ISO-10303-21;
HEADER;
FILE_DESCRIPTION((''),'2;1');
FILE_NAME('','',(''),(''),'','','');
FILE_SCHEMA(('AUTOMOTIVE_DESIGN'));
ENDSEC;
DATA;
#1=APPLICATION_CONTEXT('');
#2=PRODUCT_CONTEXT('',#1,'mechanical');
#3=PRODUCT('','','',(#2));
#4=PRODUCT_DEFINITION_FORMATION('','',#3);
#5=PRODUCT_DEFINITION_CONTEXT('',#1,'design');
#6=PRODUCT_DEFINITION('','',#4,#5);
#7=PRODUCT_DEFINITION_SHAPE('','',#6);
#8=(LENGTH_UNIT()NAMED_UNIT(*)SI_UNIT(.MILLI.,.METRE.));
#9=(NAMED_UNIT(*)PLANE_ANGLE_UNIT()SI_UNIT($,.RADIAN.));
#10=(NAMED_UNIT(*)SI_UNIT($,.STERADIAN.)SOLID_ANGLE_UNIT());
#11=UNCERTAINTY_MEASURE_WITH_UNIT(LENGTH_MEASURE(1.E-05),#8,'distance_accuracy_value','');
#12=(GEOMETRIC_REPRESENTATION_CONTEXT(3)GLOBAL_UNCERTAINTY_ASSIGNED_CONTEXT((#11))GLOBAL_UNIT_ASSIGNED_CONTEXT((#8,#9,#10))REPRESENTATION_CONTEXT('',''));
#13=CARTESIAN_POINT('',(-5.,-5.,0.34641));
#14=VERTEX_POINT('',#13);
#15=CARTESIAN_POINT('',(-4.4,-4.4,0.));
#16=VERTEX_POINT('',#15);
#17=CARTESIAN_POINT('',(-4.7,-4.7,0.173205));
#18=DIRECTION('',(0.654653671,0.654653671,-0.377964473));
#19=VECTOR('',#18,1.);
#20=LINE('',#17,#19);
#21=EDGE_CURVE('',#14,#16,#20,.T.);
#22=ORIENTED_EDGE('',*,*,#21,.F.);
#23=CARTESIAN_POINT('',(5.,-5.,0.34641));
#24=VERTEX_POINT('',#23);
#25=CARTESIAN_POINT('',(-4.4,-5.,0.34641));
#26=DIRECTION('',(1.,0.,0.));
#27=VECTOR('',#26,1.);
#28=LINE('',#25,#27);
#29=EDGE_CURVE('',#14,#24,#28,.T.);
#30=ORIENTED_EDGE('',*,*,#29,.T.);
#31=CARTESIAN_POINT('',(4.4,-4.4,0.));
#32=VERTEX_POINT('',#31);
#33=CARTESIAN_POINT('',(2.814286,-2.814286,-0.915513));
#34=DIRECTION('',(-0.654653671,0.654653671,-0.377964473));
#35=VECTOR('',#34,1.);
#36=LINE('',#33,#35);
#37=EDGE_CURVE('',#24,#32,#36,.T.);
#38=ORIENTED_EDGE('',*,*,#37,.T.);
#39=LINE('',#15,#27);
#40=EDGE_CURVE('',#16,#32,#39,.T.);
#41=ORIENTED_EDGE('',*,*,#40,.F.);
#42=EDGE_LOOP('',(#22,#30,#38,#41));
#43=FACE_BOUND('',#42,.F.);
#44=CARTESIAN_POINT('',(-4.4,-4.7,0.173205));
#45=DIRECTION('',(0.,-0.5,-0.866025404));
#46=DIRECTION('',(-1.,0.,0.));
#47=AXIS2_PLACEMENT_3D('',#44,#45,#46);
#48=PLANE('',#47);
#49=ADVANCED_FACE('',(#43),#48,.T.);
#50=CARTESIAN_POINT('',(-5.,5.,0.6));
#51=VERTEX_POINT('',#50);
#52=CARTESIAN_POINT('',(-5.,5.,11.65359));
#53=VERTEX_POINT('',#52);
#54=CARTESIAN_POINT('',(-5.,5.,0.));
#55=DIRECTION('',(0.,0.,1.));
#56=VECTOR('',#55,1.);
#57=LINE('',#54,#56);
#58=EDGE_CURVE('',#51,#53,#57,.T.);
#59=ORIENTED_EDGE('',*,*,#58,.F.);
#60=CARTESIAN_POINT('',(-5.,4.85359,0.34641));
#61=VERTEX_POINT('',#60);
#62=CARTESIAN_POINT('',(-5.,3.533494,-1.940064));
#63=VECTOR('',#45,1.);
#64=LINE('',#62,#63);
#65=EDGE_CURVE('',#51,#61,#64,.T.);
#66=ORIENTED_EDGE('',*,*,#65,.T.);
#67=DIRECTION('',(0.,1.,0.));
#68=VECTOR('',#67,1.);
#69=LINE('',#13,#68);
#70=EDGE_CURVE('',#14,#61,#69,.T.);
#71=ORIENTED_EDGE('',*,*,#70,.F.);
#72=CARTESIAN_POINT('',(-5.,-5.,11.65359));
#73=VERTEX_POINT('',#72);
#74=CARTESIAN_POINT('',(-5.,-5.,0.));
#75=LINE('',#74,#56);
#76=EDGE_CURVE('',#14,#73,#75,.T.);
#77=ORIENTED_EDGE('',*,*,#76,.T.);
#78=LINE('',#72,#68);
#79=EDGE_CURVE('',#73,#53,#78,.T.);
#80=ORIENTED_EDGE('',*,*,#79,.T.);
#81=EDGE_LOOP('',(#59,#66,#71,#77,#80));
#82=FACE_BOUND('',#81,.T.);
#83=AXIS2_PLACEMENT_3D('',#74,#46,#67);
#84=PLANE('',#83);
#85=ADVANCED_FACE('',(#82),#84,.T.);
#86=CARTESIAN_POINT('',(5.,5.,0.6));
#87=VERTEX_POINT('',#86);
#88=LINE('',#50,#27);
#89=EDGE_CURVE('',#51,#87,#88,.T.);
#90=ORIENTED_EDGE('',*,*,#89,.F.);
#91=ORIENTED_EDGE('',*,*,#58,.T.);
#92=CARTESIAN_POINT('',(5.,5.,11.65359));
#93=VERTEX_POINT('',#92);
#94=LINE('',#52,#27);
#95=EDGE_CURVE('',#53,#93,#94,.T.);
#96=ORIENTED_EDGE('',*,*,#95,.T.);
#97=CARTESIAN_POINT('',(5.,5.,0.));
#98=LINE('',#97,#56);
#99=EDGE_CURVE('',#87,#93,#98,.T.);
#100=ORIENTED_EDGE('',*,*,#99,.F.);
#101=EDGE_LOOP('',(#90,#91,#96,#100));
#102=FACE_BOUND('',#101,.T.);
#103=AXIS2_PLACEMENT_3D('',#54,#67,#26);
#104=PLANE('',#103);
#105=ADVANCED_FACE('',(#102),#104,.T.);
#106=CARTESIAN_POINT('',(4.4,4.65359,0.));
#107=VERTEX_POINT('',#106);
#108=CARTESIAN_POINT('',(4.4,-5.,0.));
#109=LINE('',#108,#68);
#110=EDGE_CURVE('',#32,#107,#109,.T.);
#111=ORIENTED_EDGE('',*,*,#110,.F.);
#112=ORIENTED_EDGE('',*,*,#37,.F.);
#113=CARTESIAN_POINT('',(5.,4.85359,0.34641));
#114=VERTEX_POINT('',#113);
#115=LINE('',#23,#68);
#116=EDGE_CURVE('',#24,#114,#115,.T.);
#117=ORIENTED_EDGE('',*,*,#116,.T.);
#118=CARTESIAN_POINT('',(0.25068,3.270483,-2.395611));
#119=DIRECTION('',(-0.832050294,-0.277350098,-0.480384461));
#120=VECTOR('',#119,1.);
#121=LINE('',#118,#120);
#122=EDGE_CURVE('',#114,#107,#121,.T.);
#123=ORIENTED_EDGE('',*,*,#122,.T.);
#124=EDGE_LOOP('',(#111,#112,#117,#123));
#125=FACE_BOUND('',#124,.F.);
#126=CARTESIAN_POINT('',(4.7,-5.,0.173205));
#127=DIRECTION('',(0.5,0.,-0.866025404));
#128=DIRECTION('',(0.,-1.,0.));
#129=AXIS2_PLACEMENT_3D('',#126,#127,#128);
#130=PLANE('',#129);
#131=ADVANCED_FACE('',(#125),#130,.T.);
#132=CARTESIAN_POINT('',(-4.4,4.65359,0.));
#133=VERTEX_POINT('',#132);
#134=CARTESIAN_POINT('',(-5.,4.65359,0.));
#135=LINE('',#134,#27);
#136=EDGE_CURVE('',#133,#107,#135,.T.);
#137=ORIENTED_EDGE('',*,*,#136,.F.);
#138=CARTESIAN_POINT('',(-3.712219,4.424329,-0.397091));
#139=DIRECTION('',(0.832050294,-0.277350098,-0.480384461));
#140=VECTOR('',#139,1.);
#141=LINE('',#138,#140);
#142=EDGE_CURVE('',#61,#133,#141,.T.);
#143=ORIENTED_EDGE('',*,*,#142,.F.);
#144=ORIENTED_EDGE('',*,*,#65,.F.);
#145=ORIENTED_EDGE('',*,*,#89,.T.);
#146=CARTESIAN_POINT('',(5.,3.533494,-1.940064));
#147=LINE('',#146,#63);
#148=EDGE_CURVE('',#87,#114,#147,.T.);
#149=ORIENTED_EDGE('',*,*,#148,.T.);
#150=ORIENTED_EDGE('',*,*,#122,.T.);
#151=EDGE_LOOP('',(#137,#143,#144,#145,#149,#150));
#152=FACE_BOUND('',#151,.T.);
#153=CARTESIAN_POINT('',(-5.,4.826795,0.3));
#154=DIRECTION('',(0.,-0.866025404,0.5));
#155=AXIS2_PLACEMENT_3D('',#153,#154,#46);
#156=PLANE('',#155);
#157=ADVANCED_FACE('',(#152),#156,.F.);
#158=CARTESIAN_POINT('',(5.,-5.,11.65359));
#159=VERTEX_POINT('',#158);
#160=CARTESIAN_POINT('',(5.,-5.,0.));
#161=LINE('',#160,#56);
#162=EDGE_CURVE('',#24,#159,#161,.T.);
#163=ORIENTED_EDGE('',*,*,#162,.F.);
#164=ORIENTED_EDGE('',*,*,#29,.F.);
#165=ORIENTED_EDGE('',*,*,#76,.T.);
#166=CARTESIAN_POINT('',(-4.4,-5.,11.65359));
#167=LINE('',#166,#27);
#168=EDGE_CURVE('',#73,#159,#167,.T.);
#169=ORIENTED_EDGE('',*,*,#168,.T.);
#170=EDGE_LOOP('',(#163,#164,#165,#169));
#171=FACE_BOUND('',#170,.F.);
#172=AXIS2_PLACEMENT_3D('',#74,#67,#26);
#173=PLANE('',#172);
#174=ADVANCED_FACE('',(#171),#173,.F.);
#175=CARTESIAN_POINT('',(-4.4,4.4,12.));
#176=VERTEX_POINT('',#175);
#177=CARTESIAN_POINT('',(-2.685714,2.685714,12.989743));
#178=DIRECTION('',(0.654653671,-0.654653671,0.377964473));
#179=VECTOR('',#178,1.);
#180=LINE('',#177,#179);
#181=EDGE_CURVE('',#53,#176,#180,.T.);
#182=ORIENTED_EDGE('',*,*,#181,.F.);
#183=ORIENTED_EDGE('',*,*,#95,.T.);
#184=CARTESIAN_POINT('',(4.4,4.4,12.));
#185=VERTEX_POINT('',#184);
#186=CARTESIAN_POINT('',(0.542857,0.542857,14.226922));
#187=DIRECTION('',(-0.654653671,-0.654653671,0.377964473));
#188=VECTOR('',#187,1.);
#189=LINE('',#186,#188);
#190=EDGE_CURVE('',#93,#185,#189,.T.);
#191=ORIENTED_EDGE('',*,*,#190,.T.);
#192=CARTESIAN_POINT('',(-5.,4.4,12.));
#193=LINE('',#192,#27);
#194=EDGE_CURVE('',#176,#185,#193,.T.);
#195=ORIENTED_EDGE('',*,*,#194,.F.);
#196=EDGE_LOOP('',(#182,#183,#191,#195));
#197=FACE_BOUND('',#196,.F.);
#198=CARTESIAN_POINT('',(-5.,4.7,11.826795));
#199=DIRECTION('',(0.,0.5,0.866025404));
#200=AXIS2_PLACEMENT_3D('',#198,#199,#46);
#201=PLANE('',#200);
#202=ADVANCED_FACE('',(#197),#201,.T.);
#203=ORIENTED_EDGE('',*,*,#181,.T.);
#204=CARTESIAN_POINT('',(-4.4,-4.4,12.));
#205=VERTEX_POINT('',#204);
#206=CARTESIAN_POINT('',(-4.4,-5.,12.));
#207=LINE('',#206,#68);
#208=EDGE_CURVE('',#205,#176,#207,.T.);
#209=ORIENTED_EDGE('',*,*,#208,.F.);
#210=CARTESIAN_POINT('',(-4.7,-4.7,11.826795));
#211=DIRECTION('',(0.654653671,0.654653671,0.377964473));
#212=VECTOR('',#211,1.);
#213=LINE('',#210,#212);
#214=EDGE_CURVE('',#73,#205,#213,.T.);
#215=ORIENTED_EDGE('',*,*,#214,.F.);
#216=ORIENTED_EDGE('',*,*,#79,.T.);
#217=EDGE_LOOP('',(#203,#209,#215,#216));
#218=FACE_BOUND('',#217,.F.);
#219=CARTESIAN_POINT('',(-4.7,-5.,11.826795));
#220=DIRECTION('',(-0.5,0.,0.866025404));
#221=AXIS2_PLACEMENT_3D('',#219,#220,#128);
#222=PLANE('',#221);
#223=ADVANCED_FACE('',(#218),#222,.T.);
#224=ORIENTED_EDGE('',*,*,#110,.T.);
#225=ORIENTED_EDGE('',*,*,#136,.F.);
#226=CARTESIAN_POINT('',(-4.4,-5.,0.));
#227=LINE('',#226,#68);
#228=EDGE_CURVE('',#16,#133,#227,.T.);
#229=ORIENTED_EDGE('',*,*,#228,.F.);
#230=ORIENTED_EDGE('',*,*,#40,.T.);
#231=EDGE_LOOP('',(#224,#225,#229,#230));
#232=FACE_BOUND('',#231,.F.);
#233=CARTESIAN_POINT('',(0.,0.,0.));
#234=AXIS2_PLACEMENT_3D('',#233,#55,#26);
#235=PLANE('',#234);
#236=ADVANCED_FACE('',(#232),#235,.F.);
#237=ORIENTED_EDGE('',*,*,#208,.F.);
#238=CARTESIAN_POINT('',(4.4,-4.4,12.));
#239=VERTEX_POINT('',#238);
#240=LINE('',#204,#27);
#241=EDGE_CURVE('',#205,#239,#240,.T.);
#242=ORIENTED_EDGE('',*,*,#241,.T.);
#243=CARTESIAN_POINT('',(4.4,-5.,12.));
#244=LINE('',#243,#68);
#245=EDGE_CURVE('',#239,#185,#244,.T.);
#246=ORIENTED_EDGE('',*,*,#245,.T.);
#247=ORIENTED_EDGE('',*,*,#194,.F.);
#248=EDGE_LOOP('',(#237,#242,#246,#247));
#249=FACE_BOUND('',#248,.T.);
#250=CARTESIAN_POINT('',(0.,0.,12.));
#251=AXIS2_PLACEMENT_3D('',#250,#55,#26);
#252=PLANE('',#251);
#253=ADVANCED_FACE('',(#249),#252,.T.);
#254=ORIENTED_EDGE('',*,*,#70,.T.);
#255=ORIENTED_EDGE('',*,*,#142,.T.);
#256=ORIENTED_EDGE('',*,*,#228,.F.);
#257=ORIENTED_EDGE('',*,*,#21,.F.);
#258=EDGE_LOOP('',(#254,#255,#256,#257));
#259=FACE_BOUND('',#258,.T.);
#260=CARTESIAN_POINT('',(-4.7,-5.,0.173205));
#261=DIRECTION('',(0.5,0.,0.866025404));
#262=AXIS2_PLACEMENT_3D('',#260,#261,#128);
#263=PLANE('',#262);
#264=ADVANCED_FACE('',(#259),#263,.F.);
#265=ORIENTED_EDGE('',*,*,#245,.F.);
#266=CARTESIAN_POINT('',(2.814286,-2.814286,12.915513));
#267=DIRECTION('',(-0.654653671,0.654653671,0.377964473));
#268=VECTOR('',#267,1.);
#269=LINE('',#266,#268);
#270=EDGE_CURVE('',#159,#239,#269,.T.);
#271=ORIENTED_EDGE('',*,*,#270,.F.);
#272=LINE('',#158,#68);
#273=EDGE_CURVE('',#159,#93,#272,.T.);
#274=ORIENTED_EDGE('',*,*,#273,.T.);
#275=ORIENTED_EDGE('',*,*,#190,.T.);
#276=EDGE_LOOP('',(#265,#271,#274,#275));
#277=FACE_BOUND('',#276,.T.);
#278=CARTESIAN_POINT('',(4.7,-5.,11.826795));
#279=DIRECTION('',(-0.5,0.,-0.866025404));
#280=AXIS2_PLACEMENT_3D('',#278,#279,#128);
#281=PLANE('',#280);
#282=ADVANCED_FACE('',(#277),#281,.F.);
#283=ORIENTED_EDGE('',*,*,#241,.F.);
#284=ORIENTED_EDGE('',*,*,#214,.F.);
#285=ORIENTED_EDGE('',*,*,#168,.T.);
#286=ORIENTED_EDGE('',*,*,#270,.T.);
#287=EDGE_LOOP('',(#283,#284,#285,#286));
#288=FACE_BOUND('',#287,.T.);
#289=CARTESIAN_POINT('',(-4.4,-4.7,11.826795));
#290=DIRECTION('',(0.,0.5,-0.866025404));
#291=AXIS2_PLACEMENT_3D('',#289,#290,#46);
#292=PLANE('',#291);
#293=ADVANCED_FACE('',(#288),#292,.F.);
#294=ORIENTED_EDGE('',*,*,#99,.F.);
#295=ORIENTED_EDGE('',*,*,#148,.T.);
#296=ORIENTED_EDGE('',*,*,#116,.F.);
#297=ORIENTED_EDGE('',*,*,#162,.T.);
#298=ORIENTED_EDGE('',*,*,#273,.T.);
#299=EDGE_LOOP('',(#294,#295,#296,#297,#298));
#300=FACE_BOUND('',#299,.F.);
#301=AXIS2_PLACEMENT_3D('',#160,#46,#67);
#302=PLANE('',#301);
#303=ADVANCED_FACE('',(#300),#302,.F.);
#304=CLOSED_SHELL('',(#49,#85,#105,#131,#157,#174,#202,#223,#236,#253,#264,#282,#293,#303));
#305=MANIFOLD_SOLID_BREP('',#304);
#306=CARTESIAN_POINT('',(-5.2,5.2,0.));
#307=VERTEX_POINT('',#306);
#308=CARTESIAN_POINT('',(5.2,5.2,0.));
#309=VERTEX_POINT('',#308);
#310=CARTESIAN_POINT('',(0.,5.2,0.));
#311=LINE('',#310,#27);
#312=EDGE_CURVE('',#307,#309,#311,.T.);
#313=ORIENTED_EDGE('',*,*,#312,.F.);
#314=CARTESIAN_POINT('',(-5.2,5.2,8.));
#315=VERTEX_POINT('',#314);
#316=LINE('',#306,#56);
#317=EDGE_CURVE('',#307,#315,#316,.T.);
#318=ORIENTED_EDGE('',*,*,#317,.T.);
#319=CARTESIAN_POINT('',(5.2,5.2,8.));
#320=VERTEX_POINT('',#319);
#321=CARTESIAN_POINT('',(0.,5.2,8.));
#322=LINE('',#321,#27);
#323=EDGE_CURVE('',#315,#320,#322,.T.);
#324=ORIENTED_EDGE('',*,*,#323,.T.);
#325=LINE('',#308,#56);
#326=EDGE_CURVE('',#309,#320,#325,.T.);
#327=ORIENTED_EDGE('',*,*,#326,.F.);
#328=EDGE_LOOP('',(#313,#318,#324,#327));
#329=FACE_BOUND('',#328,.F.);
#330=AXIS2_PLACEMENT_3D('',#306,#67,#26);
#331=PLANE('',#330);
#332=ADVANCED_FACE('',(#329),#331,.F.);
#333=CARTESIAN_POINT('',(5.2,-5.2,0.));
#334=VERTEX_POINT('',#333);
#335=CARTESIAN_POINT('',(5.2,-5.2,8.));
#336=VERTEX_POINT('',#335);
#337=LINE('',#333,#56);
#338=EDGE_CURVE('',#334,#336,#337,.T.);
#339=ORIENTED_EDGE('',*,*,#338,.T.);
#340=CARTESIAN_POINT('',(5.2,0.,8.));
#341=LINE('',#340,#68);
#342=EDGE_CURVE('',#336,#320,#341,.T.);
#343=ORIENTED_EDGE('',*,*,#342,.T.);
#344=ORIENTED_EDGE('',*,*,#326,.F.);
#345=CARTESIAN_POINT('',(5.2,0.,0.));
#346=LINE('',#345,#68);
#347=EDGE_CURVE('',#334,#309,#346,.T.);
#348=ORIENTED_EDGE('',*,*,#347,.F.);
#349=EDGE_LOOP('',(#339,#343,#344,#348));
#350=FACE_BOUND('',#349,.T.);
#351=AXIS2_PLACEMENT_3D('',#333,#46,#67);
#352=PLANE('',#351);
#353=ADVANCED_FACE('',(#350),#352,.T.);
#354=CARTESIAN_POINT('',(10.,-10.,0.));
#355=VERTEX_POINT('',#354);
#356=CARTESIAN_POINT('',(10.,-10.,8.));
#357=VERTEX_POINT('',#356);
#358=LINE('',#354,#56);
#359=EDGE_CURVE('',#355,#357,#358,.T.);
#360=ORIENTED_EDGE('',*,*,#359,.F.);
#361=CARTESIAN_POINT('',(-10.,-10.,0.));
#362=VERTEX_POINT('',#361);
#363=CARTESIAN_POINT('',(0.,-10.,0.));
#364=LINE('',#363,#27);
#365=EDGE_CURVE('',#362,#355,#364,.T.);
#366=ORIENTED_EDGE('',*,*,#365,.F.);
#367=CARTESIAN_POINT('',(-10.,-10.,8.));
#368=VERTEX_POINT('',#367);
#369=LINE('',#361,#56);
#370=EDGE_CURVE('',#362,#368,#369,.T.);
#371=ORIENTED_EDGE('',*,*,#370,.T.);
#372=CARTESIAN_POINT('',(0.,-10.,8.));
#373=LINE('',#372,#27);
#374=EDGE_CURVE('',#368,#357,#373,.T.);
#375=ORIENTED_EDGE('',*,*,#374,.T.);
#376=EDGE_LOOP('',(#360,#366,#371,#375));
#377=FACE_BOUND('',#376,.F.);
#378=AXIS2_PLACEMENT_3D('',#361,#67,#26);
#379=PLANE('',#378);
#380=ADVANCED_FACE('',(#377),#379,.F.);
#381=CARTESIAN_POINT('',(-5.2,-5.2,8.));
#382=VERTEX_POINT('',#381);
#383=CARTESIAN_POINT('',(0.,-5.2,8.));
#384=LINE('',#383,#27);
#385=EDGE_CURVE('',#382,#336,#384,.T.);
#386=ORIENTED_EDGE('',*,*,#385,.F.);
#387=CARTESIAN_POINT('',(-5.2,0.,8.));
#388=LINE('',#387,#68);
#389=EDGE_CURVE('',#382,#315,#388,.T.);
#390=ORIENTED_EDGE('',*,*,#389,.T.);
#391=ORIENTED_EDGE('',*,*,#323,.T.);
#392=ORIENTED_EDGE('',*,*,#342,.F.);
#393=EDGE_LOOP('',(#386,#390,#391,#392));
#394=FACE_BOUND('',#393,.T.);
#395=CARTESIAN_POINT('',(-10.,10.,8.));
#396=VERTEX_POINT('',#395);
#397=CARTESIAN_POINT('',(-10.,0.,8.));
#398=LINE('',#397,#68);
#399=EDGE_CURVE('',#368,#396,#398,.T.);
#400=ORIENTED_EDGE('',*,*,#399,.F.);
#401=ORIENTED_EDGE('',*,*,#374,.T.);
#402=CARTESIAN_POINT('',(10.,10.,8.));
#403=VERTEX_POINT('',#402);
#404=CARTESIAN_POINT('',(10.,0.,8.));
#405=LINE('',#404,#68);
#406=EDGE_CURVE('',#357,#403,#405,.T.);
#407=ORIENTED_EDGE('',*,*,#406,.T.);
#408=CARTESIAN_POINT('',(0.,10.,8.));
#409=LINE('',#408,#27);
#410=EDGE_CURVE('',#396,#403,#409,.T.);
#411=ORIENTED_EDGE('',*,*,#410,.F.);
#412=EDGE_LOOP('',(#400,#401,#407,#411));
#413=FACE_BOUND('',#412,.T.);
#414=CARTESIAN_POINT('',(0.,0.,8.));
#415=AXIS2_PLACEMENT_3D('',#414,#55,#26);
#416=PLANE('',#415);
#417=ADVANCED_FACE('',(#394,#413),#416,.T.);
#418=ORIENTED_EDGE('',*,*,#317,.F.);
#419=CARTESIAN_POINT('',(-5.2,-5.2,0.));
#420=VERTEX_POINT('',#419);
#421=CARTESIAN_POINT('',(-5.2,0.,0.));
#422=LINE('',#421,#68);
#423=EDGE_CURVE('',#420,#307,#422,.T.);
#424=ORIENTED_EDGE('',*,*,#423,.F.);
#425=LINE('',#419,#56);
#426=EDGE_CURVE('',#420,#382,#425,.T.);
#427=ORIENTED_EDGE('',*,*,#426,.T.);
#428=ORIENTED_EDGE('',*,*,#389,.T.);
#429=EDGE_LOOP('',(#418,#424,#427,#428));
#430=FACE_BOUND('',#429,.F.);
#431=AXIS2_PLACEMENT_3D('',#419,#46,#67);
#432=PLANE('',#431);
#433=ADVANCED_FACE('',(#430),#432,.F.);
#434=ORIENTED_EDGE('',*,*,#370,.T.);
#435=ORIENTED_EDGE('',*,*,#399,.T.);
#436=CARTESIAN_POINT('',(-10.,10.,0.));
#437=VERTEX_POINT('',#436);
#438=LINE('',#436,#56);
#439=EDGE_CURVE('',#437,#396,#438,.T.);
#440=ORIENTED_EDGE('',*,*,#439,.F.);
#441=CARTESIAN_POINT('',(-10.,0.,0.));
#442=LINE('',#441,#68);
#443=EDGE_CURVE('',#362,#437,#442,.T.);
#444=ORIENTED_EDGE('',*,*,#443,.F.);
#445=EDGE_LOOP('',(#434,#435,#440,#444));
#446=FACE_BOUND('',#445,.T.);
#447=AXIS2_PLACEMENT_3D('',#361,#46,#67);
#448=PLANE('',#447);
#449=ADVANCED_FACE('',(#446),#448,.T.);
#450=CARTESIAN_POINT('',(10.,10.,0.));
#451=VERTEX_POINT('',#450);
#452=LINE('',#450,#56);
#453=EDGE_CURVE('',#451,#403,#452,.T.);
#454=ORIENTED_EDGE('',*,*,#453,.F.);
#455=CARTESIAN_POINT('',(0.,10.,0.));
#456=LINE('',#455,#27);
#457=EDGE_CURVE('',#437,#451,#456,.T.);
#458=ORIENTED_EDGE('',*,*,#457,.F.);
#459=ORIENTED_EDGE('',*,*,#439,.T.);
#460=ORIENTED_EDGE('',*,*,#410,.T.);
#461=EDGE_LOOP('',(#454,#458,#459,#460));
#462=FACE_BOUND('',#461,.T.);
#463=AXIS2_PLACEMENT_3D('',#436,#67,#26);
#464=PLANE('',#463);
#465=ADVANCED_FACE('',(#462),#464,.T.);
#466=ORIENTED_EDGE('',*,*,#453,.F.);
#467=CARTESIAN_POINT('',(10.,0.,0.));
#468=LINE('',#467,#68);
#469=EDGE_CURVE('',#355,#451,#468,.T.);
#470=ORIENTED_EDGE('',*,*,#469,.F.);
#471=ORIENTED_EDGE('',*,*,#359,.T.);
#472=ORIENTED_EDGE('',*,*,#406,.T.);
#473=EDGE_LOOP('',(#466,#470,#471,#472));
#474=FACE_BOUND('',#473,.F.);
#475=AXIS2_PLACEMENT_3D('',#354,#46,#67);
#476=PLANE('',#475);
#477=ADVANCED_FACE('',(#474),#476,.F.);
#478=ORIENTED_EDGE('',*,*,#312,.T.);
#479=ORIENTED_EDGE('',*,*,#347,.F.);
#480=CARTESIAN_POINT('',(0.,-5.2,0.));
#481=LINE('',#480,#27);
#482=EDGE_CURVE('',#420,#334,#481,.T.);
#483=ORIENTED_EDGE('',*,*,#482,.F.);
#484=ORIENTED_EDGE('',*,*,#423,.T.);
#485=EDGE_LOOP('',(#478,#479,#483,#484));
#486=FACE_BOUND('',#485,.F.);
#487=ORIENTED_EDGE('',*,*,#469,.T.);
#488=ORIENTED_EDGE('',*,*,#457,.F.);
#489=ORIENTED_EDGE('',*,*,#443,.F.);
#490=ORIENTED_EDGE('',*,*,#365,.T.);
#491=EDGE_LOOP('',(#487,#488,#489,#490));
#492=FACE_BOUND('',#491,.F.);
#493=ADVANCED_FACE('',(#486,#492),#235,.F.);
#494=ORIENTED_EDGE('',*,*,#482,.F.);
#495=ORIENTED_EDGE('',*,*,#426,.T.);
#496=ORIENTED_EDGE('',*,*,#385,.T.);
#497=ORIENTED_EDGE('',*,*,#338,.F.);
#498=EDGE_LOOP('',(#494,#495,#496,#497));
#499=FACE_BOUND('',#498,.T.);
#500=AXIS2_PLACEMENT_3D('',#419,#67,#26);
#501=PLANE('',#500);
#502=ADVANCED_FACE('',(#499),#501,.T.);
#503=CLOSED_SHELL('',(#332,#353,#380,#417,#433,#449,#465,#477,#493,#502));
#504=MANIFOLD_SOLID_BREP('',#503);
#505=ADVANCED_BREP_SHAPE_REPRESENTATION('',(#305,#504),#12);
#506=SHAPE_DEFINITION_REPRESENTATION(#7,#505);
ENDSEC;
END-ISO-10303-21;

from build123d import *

# Parameters (mm, degrees)
F0_W        = 10
F0_H        = 10
F1_DEPTH    = 12
F0_W_2      = 20
F0_H_2      = 20
F0_W_3      = 10.4
F0_H_3      = 10.4
F2_DEPTH    = 8
F3_C1_SIZE2 = 0.6
F3_C1_SIZE  = 0.3464101615
F3_C2_SIZE2 = 0.6
F3_C2_SIZE  = 0.3464101615
F3_C3_SIZE2 = 0.3464101615
F3_C3_SIZE  = 0.6
F3_C4_SIZE2 = 0.6
F3_C4_SIZE  = 0.3464101615
F3_C5_SIZE2 = 0.6
F3_C5_SIZE  = 0.3464101615
F3_C6_SIZE2 = 0.6
F3_C6_SIZE  = 0.3464101615
F3_C7_SIZE2 = 0.6
F3_C7_SIZE  = 0.3464101615
F3_C8_SIZE2 = 0.6
F3_C8_SIZE  = 0.3464101615


with BuildPart() as f1:
    # F0 (on Top) → F1 (new body)
    with BuildSketch(Plane.XY):
        Rectangle(F0_W, F0_H)
    extrude(amount=F1_DEPTH)

    # F3: chamfer of 0.6 x 0.3464101615 on 8 edges, made by hand

    # F3_c1
    f3_c1_edges = [f1.edges().sort_by_distance(p)[0] for p in [
        (5, 0, 0),
    ]]
    f3_c1_side = f1.faces().sort_by_distance((5, 0, 0.0069282032))[0]
    chamfer(f3_c1_edges, length=F3_C1_SIZE, length2=F3_C1_SIZE2, reference=f3_c1_side)

    # F3_c2
    f3_c2_edges = [f1.edges().sort_by_distance(p)[0] for p in [
        (5, 0, 12),
    ]]
    f3_c2_side = f1.faces().sort_by_distance((5, 0, 11.9930717968))[0]
    chamfer(f3_c2_edges, length=F3_C2_SIZE, length2=F3_C2_SIZE2, reference=f3_c2_side)

    # F3_c3
    f3_c3_edges = [f1.edges().sort_by_distance(p)[0] for p in [
        (-0.3, 5, 0),
    ]]
    f3_c3_side = f1.faces().sort_by_distance((-0.3, 5, 0.0069282032))[0]
    chamfer(f3_c3_edges, length=F3_C3_SIZE, length2=F3_C3_SIZE2, reference=f3_c3_side)

    # F3_c4
    f3_c4_edges = [f1.edges().sort_by_distance(p)[0] for p in [
        (-0.3, 5, 12),
    ]]
    f3_c4_side = f1.faces().sort_by_distance((-0.3, 5, 11.9930717968))[0]
    chamfer(f3_c4_edges, length=F3_C4_SIZE, length2=F3_C4_SIZE2, reference=f3_c4_side)

    # F3_c5
    f3_c5_edges = [f1.edges().sort_by_distance(p)[0] for p in [
        (-5, -0.1732050808, 0),
    ]]
    f3_c5_side = f1.faces().sort_by_distance((-5, -0.1732050808, 0.0069282032))[0]
    chamfer(f3_c5_edges, length=F3_C5_SIZE, length2=F3_C5_SIZE2, reference=f3_c5_side)

    # F3_c6
    f3_c6_edges = [f1.edges().sort_by_distance(p)[0] for p in [
        (-5, -0.3, 12),
    ]]
    f3_c6_side = f1.faces().sort_by_distance((-5, -0.3, 11.9930717968))[0]
    chamfer(f3_c6_edges, length=F3_C6_SIZE, length2=F3_C6_SIZE2, reference=f3_c6_side)

    # F3_c7
    f3_c7_edges = [f1.edges().sort_by_distance(p)[0] for p in [
        (0, -5, 0),
    ]]
    f3_c7_side = f1.faces().sort_by_distance((0, -5, 0.0069282032))[0]
    chamfer(f3_c7_edges, length=F3_C7_SIZE, length2=F3_C7_SIZE2, reference=f3_c7_side)

    # F3_c8
    f3_c8_edges = [f1.edges().sort_by_distance(p)[0] for p in [
        (0, -5, 12),
    ]]
    f3_c8_side = f1.faces().sort_by_distance((0, -5, 11.9930717968))[0]
    chamfer(f3_c8_edges, length=F3_C8_SIZE, length2=F3_C8_SIZE2, reference=f3_c8_side)


with BuildPart() as f2:
    # F0 (on Top) → F2 (new body)
    with BuildSketch(Plane.XY):
        Rectangle(F0_W_2, F0_H_2)
        Rectangle(F0_W_3, F0_H_3, mode=Mode.SUBTRACT)
    extrude(amount=F2_DEPTH)


solid = Compound([f1.part, f2.part])
